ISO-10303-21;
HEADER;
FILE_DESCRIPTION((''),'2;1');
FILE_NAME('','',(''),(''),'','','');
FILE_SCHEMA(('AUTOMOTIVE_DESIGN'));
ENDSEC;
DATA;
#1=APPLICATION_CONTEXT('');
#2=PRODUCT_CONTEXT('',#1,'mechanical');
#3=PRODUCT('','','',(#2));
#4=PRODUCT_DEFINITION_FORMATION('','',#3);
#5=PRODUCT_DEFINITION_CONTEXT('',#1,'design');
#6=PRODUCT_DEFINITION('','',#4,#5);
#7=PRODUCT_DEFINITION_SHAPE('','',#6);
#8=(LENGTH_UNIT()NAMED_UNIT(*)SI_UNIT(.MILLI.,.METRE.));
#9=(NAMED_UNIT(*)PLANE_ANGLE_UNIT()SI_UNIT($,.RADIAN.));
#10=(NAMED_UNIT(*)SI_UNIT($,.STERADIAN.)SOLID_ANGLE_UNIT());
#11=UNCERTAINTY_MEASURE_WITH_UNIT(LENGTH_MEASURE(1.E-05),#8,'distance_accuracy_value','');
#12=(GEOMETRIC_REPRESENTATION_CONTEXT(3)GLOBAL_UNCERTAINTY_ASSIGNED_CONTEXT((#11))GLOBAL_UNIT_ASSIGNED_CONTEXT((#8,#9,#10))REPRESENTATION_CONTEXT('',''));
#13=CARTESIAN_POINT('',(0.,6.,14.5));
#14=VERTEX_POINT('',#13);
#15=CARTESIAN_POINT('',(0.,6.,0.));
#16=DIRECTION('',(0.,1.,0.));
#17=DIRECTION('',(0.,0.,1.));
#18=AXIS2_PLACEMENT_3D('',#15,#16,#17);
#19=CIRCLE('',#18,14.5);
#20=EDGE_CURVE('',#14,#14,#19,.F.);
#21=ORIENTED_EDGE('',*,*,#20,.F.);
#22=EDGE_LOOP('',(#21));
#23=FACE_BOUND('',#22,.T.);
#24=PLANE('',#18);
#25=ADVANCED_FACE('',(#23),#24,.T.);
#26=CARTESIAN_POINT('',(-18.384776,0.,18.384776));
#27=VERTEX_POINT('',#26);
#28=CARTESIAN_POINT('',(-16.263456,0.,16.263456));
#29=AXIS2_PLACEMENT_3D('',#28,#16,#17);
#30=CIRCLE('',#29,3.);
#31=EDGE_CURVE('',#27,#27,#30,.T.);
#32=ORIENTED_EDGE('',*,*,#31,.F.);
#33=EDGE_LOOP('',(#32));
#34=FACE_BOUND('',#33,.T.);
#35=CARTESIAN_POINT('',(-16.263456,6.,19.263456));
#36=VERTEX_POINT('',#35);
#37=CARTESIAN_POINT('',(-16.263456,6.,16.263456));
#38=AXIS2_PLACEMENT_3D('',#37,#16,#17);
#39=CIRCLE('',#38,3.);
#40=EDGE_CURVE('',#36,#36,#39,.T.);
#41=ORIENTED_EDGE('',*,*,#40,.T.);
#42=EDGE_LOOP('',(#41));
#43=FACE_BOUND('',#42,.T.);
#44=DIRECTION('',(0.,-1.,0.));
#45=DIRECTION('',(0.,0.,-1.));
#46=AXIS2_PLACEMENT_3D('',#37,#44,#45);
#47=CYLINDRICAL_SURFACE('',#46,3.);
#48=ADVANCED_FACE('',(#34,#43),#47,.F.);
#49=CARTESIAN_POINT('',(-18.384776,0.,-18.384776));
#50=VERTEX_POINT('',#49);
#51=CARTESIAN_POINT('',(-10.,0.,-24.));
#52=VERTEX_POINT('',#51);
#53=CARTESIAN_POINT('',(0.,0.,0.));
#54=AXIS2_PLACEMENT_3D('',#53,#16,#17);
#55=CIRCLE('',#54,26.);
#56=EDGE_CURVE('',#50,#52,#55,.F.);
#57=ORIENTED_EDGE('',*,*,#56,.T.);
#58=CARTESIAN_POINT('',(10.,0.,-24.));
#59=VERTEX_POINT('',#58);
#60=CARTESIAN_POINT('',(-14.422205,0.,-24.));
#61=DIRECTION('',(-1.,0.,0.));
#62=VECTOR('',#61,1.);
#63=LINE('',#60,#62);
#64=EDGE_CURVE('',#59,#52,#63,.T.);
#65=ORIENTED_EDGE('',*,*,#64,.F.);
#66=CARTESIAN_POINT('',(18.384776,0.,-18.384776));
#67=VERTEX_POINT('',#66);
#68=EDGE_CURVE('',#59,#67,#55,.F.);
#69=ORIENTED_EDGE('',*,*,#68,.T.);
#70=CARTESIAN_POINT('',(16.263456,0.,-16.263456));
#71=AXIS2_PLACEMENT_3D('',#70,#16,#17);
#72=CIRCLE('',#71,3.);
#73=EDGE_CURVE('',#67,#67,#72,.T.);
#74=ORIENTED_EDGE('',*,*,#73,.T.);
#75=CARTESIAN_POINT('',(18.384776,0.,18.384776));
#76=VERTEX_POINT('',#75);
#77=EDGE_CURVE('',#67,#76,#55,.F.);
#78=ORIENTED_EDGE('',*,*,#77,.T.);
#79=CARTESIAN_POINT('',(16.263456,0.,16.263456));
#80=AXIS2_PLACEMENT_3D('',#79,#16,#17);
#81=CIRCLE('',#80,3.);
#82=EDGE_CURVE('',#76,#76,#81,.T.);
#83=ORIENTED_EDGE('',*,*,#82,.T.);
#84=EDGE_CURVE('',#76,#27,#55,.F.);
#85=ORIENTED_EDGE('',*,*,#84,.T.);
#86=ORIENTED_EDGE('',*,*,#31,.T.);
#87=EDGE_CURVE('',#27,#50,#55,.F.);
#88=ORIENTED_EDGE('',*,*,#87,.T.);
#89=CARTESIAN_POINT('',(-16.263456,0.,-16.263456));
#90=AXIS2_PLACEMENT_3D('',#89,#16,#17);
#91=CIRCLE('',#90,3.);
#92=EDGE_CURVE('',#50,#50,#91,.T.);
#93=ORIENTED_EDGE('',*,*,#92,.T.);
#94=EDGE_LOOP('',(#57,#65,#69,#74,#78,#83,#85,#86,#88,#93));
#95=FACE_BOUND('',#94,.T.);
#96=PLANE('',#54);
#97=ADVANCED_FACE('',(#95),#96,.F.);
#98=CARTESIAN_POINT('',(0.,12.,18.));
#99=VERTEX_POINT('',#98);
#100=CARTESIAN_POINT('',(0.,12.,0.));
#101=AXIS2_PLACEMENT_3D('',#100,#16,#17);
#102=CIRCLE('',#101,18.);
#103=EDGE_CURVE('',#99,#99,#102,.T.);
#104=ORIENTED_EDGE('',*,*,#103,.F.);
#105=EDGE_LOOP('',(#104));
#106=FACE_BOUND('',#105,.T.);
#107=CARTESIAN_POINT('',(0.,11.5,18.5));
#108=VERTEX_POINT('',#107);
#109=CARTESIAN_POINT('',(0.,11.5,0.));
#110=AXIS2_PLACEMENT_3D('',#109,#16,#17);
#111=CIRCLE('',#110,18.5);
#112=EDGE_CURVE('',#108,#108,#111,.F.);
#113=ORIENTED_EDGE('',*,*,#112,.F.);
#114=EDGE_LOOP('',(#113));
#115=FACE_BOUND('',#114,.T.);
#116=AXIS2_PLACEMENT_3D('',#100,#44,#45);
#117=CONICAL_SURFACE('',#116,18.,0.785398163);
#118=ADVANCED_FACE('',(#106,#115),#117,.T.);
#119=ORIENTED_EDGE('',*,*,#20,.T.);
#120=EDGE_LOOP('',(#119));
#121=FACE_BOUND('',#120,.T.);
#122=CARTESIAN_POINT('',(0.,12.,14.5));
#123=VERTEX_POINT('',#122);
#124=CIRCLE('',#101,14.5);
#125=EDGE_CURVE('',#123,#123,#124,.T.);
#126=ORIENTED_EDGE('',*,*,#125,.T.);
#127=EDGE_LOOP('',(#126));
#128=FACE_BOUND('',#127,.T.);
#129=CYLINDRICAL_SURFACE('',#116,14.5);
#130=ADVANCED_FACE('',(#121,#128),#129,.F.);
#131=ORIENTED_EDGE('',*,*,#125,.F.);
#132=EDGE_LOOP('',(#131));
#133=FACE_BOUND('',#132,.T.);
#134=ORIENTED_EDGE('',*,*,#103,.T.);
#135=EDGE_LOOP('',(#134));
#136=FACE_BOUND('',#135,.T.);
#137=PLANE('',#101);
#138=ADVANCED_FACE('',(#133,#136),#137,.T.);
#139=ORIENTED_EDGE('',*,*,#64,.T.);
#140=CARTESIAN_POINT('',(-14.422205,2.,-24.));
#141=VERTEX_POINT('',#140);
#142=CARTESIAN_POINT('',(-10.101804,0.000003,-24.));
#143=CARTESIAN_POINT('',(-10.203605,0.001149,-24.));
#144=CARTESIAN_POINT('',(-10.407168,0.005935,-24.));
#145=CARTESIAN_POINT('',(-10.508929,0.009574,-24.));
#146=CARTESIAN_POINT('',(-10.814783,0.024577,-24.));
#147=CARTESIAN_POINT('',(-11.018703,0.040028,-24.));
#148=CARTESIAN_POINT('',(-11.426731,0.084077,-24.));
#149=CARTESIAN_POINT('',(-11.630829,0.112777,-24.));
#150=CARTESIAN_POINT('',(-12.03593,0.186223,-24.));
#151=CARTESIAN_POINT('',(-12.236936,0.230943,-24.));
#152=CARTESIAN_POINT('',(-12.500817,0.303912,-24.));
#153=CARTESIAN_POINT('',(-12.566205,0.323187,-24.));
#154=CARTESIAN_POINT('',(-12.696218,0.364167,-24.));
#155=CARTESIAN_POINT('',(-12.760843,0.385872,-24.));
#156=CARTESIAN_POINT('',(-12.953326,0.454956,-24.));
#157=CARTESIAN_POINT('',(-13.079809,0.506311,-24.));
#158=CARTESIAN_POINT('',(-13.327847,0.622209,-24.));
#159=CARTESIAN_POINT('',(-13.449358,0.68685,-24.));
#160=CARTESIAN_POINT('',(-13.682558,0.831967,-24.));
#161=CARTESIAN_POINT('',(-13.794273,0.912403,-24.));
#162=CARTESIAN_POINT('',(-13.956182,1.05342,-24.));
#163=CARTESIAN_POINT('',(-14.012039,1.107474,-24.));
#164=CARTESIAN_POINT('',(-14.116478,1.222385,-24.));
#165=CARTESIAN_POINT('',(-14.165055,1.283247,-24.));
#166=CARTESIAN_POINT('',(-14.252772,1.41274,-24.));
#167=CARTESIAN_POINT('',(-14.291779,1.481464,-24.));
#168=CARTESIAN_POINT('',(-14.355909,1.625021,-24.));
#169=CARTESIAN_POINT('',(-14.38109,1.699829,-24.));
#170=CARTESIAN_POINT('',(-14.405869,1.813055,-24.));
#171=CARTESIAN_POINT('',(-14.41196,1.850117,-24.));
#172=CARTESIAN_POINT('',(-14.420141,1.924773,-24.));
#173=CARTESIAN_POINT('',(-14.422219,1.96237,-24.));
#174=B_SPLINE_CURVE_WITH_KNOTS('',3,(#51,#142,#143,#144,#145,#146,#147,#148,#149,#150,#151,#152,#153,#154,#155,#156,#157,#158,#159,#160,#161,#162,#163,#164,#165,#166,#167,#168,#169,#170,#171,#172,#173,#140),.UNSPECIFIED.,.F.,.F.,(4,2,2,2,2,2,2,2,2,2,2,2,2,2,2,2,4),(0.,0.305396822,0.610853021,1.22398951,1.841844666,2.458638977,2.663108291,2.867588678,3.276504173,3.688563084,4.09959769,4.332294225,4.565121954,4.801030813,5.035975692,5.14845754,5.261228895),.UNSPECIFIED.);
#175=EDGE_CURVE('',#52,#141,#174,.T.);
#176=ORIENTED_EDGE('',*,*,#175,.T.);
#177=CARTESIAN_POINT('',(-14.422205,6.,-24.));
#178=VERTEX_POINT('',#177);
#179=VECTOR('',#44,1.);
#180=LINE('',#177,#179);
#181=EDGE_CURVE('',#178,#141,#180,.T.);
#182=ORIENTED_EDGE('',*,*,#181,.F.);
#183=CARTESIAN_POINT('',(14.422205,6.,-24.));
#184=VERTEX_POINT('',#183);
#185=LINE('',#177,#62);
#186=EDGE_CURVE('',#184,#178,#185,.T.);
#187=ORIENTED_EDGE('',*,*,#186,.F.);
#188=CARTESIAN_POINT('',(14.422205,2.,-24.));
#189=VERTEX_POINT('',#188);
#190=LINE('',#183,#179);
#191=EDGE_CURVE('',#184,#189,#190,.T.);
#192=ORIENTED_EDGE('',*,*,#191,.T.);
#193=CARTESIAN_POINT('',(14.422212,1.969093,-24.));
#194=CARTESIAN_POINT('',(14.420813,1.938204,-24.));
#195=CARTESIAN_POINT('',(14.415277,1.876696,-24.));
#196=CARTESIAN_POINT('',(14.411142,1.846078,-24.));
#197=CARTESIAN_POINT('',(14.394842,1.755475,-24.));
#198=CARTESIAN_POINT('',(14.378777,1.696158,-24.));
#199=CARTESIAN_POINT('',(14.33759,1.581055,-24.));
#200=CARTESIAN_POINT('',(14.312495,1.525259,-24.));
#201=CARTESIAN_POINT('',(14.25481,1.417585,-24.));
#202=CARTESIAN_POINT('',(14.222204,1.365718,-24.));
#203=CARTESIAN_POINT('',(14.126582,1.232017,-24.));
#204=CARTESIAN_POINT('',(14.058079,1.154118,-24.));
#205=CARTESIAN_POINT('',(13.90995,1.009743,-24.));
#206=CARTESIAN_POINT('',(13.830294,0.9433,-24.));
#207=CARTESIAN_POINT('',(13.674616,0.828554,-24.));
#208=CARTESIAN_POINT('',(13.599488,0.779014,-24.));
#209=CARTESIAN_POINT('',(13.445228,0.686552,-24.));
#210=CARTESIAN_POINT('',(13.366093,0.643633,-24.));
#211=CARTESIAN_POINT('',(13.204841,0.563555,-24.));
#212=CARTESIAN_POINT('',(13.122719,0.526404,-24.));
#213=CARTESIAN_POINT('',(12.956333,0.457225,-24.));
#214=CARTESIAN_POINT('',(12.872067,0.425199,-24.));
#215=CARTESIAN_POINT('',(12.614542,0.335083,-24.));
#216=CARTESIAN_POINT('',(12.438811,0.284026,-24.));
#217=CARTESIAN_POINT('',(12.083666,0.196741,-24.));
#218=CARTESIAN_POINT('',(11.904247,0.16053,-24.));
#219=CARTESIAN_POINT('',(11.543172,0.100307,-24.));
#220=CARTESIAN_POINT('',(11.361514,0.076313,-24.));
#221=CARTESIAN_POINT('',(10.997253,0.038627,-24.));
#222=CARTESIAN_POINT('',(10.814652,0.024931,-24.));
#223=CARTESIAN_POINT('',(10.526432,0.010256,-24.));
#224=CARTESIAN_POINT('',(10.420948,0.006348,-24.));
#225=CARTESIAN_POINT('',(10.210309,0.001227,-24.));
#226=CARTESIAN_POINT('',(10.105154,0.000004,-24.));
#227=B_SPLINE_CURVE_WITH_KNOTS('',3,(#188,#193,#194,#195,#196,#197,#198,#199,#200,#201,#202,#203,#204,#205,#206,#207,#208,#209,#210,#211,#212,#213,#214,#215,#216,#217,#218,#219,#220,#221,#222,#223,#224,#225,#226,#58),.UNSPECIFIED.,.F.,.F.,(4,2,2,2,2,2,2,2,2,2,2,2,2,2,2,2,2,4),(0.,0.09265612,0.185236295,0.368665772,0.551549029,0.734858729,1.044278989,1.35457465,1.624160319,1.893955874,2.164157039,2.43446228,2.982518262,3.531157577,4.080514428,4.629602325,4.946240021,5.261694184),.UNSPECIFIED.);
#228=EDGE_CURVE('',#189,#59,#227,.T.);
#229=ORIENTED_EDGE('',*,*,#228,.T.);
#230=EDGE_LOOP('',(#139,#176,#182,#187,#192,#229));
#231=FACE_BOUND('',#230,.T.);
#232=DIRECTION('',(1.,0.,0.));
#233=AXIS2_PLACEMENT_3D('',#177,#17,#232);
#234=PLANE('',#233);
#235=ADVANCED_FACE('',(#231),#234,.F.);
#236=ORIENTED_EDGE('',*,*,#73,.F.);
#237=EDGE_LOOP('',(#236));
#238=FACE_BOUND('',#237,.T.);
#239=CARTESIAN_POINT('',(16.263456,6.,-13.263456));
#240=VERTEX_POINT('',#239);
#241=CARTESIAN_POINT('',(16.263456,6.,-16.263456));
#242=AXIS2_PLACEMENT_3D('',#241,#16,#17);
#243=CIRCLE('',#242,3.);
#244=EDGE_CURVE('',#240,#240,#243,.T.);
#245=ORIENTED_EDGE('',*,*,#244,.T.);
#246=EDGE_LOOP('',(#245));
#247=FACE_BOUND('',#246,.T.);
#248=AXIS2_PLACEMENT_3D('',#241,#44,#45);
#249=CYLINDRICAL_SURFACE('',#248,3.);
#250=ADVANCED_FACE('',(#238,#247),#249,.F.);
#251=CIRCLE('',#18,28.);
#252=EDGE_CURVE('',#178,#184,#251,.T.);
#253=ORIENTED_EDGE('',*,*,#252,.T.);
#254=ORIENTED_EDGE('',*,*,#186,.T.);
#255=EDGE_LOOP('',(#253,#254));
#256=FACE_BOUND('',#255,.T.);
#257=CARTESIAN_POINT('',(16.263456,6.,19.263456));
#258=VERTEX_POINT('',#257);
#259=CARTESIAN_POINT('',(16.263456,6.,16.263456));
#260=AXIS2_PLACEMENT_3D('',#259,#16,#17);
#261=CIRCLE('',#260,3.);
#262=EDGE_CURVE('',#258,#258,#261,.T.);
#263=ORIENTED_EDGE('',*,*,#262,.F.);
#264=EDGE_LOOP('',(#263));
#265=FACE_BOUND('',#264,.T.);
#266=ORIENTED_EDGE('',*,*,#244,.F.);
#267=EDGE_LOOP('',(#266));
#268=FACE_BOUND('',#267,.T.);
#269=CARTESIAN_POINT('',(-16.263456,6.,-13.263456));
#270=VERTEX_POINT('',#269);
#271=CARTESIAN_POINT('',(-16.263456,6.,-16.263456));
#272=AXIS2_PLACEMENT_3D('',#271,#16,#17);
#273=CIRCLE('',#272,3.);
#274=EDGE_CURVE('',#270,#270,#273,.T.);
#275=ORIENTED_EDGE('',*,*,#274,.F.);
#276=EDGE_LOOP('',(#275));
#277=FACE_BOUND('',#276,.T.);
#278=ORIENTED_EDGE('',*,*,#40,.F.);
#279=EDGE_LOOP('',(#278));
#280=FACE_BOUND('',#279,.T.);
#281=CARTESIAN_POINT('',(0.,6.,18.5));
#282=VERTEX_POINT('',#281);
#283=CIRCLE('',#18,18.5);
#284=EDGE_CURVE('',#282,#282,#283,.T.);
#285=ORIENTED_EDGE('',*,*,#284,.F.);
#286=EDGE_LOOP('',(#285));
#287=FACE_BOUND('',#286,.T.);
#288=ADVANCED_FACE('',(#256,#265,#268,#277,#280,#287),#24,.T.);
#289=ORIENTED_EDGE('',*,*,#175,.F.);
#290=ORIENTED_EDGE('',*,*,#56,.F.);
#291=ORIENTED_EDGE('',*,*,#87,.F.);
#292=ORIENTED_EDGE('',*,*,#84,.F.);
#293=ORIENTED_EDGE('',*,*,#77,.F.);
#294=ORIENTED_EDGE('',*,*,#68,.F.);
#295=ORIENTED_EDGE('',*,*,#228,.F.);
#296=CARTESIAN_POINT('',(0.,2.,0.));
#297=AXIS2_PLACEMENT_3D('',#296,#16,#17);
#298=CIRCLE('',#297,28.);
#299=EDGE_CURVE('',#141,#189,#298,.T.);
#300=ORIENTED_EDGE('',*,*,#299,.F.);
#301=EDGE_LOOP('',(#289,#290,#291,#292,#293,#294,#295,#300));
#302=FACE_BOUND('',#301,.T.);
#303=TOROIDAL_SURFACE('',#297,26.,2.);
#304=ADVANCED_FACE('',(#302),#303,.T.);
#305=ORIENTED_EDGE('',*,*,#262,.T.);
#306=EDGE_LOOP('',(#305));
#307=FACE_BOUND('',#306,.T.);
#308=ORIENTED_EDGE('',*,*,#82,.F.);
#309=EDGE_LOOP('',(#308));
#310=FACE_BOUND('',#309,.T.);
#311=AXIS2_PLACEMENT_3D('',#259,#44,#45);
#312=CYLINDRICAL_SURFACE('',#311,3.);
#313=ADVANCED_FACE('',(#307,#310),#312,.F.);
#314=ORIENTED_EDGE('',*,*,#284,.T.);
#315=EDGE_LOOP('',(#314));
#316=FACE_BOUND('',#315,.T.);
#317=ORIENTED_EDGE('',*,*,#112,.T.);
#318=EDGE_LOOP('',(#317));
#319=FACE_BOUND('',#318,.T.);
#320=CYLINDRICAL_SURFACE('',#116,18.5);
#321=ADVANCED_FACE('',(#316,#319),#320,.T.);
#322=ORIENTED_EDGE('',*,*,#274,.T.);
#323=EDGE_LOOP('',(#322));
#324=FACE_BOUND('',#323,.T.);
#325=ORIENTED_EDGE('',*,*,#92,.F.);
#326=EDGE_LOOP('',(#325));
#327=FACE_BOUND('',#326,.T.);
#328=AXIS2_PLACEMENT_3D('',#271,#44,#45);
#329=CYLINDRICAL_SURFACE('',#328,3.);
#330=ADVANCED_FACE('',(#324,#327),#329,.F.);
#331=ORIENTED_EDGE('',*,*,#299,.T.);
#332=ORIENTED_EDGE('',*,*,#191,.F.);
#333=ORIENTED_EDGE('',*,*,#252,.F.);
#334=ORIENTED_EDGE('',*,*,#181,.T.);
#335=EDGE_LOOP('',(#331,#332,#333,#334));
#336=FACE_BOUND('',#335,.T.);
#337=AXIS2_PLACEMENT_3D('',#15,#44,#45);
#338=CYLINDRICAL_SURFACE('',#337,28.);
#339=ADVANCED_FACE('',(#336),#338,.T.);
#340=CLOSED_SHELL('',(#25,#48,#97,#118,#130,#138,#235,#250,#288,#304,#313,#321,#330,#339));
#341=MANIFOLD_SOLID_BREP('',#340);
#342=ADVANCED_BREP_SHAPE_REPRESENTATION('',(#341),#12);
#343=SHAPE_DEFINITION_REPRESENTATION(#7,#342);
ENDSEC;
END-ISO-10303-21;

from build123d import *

# Parameters (mm, degrees)
SKETCH_1_R      = 3
EXTRUDE_1_DEPTH = 6
SKETCH_2_R      = 18.5
SKETCH_2_R_2    = 14.5
EXTRUDE_2_DEPTH = 6
FILLET_1_R      = 2
CHAMFER_1_SIZE  = 0.5


with BuildPart() as part:
    # 草图1 → 凸台-拉伸1 (new body)
    with BuildSketch(Plane(origin=(0, 0, 0), x_dir=(1, 0, 0), z_dir=(0, 1, 0))):
        with BuildLine():
            Line((-14.422205102, 24), (14.422205102, 24))
            ThreePointArc((14.422205102, 24), (0, -28), (-14.422205102, 24))
        make_face()
        with Locations(Location((-16.263455967, 16.263455967, 0), (0, 0, 270))):
            Circle(SKETCH_1_R, mode=Mode.SUBTRACT)
        with Locations(Location((16.263455967, 16.263455967, 0), (0, 0, 270))):
            Circle(SKETCH_1_R, mode=Mode.SUBTRACT)
        with Locations(Location((16.263455967, -16.263455967, 0), (0, 0, 270))):
            Circle(SKETCH_1_R, mode=Mode.SUBTRACT)
        with Locations(Location((-16.263455967, -16.263455967, 0), (0, 0, 270))):
            Circle(SKETCH_1_R, mode=Mode.SUBTRACT)
    extrude(amount=EXTRUDE_1_DEPTH)

    # 草图2 → 凸台-拉伸2 (add)
    with BuildSketch(Plane(origin=(0, 6, 0), x_dir=(1, 0, 0), z_dir=(0, 1, 0))):
        with Locations(Location((0, 0, 0), (0, 0, 270))):
            Circle(SKETCH_2_R)
        with Locations(Location((0, 0, 0), (0, 0, 270))):
            Circle(SKETCH_2_R_2, mode=Mode.SUBTRACT)
    extrude(amount=EXTRUDE_2_DEPTH)

    # 圆角1
    fillet_1_edges = [part.edges().sort_by_distance(p)[0] for p in [
        (0, 0, 28),
    ]]
    fillet(fillet_1_edges, radius=FILLET_1_R - 0.0001)  # a hair under: the kernel refuses the full size

    # 倒角1
    chamfer_1_edges = [part.edges().sort_by_distance(p)[0] for p in [
        (0, 12, -18.5),
    ]]
    chamfer(chamfer_1_edges, length=CHAMFER_1_SIZE)


solid = part.part
